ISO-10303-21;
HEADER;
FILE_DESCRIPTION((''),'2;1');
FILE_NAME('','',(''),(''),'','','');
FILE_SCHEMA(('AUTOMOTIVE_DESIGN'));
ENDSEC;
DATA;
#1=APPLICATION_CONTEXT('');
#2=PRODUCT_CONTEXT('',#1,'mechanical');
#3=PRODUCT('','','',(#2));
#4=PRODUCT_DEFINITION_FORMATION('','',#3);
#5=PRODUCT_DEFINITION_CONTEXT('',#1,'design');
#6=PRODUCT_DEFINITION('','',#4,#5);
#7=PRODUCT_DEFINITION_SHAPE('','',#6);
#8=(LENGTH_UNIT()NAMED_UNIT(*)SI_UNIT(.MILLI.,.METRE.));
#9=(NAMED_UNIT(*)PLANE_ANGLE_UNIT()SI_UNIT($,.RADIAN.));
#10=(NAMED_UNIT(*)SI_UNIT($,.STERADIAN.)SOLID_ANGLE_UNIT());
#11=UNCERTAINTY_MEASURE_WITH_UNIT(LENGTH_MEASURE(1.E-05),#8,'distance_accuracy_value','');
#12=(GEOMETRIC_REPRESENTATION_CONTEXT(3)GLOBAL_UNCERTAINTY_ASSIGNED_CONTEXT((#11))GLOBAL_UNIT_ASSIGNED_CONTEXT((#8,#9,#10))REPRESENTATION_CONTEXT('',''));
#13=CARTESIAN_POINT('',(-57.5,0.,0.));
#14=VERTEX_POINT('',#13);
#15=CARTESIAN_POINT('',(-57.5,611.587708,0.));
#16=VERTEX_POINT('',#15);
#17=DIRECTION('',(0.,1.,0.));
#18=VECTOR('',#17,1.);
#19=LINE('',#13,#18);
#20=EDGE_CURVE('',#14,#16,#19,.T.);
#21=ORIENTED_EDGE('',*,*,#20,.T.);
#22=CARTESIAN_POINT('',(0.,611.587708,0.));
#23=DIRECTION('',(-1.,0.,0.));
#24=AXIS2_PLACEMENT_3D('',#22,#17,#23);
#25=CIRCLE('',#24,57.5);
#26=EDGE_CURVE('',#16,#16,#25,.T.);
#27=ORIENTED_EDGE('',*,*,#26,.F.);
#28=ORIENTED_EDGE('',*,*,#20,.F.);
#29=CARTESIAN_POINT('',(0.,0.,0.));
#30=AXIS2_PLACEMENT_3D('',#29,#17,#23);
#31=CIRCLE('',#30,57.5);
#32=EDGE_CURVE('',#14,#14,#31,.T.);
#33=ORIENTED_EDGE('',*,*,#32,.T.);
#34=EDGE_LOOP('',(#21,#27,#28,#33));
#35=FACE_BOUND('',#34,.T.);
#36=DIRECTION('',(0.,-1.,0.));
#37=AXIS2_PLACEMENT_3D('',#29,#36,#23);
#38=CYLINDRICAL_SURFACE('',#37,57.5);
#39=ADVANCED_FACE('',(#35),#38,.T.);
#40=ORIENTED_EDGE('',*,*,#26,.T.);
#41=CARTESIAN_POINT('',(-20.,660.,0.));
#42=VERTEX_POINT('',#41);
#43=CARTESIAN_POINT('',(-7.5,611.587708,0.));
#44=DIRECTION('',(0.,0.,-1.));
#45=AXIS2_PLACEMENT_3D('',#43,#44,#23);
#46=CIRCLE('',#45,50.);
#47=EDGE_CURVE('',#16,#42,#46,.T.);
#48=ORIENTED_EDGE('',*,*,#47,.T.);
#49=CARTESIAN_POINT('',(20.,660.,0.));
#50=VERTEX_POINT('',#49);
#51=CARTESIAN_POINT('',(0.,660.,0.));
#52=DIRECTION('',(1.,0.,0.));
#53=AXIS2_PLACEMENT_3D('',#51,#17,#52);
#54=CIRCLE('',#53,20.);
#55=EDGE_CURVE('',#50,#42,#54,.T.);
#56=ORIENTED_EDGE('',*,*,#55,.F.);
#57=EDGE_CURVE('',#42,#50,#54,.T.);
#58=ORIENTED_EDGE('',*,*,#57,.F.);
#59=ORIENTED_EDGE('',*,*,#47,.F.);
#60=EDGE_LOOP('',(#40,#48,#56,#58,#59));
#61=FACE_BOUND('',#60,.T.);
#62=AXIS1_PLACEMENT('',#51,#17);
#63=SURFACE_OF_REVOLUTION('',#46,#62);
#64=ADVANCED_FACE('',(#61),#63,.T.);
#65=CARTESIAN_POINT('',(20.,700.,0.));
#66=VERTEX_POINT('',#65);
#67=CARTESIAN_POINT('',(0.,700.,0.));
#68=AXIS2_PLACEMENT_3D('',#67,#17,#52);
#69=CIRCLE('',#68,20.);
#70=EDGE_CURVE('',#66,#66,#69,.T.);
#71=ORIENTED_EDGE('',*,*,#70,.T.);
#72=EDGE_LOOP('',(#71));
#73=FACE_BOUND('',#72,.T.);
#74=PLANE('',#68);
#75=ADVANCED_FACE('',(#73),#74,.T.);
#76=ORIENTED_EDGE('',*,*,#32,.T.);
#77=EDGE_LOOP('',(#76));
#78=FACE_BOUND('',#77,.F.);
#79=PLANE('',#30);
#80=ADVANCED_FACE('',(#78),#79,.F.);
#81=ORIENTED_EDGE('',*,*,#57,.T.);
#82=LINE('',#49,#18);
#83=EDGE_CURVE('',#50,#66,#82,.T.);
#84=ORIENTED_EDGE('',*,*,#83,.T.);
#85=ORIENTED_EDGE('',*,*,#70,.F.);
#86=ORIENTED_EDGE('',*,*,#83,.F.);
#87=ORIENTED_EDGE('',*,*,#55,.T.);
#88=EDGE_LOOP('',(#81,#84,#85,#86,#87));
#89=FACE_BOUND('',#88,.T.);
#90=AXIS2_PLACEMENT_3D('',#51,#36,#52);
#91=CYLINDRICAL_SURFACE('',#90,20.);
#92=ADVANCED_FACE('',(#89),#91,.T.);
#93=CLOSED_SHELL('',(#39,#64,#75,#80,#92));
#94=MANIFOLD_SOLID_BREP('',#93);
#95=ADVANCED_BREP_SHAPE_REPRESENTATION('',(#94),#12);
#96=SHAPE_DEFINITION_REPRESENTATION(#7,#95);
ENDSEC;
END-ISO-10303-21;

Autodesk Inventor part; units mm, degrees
ref_plane "YZ Plane" through (0, 0, 0) normal (1, 0, 0) x (0, 1, 0)
ref_plane "XZ Plane" through (0, 0, 0) normal (0, 1, 0) x (-1, 0, 0)
ref_plane "XY Plane" through (0, 0, 0) normal (0, 0, 1) x (1, 0, 0)
sketch "Sketch1" plane through (0, 0, 0) normal (0, 1, 0) x (-1, 0, 0)
  circle A0 centre (0, 0) radius 57.5
  dimension "d0" = 115
extrude "Extrusion1" add sketch "Sketch1" along normal blind 660
sketch "Sketch2" plane through (0, 660, 0) normal (0, 1, 0) x (1, 0, 0)
  circle A0 centre (0, 0) radius 20
  dimension "d3" = 40
extrude "Extrusion2" add sketch "Sketch2" along normal blind 40
fillet "Fillet1" radius 50 1 edges at (57.5, 660, 0)
properties part number "Cylinder"
